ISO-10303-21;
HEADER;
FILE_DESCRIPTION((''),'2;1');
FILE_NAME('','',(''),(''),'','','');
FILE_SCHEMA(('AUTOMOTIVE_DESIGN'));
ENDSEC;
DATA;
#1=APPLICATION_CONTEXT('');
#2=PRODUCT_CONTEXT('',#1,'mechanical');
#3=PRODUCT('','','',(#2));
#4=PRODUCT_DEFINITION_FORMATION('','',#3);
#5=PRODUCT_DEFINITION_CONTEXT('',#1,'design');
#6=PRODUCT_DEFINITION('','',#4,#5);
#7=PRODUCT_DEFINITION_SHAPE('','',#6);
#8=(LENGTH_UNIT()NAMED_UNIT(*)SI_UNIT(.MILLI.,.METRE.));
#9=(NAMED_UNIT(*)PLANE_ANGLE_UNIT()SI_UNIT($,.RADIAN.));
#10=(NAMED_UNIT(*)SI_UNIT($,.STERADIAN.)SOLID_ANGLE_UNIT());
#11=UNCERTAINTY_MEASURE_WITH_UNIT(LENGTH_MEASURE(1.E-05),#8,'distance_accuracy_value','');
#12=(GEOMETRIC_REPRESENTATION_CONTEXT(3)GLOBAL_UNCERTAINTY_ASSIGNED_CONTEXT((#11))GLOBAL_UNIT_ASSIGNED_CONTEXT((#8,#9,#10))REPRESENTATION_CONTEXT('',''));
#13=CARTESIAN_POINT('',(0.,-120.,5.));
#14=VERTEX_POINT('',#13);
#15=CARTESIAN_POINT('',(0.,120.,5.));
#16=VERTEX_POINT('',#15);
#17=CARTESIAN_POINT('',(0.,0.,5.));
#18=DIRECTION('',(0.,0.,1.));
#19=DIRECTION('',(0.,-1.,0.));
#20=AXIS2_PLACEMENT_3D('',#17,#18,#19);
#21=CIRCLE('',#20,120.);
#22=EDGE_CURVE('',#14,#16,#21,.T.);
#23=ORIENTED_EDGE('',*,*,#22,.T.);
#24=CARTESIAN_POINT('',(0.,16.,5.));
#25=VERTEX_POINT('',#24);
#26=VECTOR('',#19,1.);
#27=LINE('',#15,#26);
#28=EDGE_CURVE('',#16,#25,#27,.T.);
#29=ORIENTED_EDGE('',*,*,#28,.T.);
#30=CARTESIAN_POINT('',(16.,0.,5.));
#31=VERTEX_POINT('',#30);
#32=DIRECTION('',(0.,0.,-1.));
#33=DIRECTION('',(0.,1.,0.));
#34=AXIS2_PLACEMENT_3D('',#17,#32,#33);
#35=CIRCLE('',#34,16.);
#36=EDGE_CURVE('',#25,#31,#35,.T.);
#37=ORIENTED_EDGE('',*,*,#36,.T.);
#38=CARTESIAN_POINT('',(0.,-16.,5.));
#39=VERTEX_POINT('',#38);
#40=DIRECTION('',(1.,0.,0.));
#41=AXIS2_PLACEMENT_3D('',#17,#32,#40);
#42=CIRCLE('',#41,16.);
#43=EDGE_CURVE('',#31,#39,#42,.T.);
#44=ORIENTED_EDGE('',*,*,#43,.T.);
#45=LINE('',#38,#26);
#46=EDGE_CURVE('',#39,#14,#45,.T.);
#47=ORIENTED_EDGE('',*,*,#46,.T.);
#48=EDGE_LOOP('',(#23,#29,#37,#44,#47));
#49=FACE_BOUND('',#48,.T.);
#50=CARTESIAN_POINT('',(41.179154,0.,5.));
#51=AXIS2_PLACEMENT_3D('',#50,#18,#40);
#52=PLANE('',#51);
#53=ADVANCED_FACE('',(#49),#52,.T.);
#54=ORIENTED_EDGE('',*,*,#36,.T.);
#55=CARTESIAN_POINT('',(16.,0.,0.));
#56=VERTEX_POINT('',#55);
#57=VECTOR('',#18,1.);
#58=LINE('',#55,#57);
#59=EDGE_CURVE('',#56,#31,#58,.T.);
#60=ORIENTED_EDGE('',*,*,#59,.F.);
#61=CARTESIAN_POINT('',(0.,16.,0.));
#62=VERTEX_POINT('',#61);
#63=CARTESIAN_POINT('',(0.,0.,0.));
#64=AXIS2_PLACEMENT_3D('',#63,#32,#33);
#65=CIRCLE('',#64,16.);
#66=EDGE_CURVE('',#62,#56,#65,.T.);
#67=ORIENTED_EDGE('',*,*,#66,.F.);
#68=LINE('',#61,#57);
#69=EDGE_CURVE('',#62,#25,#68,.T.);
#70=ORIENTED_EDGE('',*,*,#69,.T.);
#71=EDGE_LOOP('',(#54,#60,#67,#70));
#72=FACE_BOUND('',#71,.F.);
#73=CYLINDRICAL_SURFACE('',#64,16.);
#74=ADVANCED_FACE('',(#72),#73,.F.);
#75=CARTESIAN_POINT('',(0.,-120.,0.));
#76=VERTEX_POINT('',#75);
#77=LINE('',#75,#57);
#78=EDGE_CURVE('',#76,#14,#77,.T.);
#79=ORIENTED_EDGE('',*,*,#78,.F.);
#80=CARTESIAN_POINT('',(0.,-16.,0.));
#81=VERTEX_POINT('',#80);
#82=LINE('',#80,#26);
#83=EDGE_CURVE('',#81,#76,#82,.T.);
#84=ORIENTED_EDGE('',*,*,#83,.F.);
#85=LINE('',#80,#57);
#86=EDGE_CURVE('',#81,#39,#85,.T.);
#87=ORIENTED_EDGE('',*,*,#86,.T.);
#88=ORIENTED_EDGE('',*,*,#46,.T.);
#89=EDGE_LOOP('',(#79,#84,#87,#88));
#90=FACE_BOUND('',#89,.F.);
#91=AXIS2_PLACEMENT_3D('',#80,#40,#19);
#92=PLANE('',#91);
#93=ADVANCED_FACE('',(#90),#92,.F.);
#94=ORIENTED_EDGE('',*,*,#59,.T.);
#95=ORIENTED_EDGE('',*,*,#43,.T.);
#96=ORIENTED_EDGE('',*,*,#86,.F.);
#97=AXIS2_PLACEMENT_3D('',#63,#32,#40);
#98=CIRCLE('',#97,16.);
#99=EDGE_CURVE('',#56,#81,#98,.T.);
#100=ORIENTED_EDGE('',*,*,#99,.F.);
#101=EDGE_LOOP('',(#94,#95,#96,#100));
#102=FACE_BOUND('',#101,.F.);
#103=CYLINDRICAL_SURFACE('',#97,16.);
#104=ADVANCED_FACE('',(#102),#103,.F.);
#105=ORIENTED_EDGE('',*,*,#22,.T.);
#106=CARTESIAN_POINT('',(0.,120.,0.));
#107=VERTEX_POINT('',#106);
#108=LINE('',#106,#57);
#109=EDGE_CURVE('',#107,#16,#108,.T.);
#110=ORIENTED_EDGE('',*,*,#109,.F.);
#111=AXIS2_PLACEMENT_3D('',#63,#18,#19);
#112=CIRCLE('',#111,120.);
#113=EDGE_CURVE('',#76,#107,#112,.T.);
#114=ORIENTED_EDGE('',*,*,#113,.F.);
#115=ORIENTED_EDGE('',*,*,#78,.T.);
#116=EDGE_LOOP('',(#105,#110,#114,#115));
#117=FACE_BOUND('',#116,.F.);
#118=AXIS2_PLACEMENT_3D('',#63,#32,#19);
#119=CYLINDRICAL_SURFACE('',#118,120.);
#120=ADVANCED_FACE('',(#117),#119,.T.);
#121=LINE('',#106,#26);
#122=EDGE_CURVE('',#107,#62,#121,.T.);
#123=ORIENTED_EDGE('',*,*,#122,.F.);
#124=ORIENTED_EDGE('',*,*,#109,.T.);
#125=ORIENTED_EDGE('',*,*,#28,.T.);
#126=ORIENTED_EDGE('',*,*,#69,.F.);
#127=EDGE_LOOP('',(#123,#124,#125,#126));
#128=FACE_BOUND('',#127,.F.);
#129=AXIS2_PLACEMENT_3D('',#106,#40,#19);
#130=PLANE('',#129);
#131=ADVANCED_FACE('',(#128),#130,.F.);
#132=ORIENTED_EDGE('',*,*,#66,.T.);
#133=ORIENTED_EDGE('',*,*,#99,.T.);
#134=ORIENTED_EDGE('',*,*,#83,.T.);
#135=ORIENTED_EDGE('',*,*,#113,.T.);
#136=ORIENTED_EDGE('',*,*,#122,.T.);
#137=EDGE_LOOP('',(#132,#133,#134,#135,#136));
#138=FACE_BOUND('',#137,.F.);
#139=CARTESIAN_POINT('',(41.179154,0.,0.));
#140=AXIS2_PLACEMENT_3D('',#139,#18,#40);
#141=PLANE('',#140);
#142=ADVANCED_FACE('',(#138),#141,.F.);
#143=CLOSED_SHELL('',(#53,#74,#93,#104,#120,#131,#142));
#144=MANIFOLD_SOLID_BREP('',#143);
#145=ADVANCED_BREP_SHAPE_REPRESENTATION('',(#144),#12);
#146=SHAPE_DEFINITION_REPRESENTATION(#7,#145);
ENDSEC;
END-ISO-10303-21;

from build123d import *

# Parameters (mm, degrees)
F1_DEPTH = 5


# Not quite as in the source:
# - a feature names something its author has since deleted; it is built from what else it names


with BuildPart() as f1:
    # F0 (on Top) → F1 (new body)
    with BuildSketch(Plane.XY):
        with BuildLine():
            Line((0, -16), (0, -120))
            ThreePointArc((0, -120), (120, 0), (0, 120))
            Line((0, 120), (0, 16))
            ThreePointArc((0, 16), (11.313708499, 11.313708499), (16, 0))
            ThreePointArc((16, 0), (11.313708499, -11.313708499), (0, -16))
        make_face()
    extrude(amount=F1_DEPTH)


solid = f1.part
